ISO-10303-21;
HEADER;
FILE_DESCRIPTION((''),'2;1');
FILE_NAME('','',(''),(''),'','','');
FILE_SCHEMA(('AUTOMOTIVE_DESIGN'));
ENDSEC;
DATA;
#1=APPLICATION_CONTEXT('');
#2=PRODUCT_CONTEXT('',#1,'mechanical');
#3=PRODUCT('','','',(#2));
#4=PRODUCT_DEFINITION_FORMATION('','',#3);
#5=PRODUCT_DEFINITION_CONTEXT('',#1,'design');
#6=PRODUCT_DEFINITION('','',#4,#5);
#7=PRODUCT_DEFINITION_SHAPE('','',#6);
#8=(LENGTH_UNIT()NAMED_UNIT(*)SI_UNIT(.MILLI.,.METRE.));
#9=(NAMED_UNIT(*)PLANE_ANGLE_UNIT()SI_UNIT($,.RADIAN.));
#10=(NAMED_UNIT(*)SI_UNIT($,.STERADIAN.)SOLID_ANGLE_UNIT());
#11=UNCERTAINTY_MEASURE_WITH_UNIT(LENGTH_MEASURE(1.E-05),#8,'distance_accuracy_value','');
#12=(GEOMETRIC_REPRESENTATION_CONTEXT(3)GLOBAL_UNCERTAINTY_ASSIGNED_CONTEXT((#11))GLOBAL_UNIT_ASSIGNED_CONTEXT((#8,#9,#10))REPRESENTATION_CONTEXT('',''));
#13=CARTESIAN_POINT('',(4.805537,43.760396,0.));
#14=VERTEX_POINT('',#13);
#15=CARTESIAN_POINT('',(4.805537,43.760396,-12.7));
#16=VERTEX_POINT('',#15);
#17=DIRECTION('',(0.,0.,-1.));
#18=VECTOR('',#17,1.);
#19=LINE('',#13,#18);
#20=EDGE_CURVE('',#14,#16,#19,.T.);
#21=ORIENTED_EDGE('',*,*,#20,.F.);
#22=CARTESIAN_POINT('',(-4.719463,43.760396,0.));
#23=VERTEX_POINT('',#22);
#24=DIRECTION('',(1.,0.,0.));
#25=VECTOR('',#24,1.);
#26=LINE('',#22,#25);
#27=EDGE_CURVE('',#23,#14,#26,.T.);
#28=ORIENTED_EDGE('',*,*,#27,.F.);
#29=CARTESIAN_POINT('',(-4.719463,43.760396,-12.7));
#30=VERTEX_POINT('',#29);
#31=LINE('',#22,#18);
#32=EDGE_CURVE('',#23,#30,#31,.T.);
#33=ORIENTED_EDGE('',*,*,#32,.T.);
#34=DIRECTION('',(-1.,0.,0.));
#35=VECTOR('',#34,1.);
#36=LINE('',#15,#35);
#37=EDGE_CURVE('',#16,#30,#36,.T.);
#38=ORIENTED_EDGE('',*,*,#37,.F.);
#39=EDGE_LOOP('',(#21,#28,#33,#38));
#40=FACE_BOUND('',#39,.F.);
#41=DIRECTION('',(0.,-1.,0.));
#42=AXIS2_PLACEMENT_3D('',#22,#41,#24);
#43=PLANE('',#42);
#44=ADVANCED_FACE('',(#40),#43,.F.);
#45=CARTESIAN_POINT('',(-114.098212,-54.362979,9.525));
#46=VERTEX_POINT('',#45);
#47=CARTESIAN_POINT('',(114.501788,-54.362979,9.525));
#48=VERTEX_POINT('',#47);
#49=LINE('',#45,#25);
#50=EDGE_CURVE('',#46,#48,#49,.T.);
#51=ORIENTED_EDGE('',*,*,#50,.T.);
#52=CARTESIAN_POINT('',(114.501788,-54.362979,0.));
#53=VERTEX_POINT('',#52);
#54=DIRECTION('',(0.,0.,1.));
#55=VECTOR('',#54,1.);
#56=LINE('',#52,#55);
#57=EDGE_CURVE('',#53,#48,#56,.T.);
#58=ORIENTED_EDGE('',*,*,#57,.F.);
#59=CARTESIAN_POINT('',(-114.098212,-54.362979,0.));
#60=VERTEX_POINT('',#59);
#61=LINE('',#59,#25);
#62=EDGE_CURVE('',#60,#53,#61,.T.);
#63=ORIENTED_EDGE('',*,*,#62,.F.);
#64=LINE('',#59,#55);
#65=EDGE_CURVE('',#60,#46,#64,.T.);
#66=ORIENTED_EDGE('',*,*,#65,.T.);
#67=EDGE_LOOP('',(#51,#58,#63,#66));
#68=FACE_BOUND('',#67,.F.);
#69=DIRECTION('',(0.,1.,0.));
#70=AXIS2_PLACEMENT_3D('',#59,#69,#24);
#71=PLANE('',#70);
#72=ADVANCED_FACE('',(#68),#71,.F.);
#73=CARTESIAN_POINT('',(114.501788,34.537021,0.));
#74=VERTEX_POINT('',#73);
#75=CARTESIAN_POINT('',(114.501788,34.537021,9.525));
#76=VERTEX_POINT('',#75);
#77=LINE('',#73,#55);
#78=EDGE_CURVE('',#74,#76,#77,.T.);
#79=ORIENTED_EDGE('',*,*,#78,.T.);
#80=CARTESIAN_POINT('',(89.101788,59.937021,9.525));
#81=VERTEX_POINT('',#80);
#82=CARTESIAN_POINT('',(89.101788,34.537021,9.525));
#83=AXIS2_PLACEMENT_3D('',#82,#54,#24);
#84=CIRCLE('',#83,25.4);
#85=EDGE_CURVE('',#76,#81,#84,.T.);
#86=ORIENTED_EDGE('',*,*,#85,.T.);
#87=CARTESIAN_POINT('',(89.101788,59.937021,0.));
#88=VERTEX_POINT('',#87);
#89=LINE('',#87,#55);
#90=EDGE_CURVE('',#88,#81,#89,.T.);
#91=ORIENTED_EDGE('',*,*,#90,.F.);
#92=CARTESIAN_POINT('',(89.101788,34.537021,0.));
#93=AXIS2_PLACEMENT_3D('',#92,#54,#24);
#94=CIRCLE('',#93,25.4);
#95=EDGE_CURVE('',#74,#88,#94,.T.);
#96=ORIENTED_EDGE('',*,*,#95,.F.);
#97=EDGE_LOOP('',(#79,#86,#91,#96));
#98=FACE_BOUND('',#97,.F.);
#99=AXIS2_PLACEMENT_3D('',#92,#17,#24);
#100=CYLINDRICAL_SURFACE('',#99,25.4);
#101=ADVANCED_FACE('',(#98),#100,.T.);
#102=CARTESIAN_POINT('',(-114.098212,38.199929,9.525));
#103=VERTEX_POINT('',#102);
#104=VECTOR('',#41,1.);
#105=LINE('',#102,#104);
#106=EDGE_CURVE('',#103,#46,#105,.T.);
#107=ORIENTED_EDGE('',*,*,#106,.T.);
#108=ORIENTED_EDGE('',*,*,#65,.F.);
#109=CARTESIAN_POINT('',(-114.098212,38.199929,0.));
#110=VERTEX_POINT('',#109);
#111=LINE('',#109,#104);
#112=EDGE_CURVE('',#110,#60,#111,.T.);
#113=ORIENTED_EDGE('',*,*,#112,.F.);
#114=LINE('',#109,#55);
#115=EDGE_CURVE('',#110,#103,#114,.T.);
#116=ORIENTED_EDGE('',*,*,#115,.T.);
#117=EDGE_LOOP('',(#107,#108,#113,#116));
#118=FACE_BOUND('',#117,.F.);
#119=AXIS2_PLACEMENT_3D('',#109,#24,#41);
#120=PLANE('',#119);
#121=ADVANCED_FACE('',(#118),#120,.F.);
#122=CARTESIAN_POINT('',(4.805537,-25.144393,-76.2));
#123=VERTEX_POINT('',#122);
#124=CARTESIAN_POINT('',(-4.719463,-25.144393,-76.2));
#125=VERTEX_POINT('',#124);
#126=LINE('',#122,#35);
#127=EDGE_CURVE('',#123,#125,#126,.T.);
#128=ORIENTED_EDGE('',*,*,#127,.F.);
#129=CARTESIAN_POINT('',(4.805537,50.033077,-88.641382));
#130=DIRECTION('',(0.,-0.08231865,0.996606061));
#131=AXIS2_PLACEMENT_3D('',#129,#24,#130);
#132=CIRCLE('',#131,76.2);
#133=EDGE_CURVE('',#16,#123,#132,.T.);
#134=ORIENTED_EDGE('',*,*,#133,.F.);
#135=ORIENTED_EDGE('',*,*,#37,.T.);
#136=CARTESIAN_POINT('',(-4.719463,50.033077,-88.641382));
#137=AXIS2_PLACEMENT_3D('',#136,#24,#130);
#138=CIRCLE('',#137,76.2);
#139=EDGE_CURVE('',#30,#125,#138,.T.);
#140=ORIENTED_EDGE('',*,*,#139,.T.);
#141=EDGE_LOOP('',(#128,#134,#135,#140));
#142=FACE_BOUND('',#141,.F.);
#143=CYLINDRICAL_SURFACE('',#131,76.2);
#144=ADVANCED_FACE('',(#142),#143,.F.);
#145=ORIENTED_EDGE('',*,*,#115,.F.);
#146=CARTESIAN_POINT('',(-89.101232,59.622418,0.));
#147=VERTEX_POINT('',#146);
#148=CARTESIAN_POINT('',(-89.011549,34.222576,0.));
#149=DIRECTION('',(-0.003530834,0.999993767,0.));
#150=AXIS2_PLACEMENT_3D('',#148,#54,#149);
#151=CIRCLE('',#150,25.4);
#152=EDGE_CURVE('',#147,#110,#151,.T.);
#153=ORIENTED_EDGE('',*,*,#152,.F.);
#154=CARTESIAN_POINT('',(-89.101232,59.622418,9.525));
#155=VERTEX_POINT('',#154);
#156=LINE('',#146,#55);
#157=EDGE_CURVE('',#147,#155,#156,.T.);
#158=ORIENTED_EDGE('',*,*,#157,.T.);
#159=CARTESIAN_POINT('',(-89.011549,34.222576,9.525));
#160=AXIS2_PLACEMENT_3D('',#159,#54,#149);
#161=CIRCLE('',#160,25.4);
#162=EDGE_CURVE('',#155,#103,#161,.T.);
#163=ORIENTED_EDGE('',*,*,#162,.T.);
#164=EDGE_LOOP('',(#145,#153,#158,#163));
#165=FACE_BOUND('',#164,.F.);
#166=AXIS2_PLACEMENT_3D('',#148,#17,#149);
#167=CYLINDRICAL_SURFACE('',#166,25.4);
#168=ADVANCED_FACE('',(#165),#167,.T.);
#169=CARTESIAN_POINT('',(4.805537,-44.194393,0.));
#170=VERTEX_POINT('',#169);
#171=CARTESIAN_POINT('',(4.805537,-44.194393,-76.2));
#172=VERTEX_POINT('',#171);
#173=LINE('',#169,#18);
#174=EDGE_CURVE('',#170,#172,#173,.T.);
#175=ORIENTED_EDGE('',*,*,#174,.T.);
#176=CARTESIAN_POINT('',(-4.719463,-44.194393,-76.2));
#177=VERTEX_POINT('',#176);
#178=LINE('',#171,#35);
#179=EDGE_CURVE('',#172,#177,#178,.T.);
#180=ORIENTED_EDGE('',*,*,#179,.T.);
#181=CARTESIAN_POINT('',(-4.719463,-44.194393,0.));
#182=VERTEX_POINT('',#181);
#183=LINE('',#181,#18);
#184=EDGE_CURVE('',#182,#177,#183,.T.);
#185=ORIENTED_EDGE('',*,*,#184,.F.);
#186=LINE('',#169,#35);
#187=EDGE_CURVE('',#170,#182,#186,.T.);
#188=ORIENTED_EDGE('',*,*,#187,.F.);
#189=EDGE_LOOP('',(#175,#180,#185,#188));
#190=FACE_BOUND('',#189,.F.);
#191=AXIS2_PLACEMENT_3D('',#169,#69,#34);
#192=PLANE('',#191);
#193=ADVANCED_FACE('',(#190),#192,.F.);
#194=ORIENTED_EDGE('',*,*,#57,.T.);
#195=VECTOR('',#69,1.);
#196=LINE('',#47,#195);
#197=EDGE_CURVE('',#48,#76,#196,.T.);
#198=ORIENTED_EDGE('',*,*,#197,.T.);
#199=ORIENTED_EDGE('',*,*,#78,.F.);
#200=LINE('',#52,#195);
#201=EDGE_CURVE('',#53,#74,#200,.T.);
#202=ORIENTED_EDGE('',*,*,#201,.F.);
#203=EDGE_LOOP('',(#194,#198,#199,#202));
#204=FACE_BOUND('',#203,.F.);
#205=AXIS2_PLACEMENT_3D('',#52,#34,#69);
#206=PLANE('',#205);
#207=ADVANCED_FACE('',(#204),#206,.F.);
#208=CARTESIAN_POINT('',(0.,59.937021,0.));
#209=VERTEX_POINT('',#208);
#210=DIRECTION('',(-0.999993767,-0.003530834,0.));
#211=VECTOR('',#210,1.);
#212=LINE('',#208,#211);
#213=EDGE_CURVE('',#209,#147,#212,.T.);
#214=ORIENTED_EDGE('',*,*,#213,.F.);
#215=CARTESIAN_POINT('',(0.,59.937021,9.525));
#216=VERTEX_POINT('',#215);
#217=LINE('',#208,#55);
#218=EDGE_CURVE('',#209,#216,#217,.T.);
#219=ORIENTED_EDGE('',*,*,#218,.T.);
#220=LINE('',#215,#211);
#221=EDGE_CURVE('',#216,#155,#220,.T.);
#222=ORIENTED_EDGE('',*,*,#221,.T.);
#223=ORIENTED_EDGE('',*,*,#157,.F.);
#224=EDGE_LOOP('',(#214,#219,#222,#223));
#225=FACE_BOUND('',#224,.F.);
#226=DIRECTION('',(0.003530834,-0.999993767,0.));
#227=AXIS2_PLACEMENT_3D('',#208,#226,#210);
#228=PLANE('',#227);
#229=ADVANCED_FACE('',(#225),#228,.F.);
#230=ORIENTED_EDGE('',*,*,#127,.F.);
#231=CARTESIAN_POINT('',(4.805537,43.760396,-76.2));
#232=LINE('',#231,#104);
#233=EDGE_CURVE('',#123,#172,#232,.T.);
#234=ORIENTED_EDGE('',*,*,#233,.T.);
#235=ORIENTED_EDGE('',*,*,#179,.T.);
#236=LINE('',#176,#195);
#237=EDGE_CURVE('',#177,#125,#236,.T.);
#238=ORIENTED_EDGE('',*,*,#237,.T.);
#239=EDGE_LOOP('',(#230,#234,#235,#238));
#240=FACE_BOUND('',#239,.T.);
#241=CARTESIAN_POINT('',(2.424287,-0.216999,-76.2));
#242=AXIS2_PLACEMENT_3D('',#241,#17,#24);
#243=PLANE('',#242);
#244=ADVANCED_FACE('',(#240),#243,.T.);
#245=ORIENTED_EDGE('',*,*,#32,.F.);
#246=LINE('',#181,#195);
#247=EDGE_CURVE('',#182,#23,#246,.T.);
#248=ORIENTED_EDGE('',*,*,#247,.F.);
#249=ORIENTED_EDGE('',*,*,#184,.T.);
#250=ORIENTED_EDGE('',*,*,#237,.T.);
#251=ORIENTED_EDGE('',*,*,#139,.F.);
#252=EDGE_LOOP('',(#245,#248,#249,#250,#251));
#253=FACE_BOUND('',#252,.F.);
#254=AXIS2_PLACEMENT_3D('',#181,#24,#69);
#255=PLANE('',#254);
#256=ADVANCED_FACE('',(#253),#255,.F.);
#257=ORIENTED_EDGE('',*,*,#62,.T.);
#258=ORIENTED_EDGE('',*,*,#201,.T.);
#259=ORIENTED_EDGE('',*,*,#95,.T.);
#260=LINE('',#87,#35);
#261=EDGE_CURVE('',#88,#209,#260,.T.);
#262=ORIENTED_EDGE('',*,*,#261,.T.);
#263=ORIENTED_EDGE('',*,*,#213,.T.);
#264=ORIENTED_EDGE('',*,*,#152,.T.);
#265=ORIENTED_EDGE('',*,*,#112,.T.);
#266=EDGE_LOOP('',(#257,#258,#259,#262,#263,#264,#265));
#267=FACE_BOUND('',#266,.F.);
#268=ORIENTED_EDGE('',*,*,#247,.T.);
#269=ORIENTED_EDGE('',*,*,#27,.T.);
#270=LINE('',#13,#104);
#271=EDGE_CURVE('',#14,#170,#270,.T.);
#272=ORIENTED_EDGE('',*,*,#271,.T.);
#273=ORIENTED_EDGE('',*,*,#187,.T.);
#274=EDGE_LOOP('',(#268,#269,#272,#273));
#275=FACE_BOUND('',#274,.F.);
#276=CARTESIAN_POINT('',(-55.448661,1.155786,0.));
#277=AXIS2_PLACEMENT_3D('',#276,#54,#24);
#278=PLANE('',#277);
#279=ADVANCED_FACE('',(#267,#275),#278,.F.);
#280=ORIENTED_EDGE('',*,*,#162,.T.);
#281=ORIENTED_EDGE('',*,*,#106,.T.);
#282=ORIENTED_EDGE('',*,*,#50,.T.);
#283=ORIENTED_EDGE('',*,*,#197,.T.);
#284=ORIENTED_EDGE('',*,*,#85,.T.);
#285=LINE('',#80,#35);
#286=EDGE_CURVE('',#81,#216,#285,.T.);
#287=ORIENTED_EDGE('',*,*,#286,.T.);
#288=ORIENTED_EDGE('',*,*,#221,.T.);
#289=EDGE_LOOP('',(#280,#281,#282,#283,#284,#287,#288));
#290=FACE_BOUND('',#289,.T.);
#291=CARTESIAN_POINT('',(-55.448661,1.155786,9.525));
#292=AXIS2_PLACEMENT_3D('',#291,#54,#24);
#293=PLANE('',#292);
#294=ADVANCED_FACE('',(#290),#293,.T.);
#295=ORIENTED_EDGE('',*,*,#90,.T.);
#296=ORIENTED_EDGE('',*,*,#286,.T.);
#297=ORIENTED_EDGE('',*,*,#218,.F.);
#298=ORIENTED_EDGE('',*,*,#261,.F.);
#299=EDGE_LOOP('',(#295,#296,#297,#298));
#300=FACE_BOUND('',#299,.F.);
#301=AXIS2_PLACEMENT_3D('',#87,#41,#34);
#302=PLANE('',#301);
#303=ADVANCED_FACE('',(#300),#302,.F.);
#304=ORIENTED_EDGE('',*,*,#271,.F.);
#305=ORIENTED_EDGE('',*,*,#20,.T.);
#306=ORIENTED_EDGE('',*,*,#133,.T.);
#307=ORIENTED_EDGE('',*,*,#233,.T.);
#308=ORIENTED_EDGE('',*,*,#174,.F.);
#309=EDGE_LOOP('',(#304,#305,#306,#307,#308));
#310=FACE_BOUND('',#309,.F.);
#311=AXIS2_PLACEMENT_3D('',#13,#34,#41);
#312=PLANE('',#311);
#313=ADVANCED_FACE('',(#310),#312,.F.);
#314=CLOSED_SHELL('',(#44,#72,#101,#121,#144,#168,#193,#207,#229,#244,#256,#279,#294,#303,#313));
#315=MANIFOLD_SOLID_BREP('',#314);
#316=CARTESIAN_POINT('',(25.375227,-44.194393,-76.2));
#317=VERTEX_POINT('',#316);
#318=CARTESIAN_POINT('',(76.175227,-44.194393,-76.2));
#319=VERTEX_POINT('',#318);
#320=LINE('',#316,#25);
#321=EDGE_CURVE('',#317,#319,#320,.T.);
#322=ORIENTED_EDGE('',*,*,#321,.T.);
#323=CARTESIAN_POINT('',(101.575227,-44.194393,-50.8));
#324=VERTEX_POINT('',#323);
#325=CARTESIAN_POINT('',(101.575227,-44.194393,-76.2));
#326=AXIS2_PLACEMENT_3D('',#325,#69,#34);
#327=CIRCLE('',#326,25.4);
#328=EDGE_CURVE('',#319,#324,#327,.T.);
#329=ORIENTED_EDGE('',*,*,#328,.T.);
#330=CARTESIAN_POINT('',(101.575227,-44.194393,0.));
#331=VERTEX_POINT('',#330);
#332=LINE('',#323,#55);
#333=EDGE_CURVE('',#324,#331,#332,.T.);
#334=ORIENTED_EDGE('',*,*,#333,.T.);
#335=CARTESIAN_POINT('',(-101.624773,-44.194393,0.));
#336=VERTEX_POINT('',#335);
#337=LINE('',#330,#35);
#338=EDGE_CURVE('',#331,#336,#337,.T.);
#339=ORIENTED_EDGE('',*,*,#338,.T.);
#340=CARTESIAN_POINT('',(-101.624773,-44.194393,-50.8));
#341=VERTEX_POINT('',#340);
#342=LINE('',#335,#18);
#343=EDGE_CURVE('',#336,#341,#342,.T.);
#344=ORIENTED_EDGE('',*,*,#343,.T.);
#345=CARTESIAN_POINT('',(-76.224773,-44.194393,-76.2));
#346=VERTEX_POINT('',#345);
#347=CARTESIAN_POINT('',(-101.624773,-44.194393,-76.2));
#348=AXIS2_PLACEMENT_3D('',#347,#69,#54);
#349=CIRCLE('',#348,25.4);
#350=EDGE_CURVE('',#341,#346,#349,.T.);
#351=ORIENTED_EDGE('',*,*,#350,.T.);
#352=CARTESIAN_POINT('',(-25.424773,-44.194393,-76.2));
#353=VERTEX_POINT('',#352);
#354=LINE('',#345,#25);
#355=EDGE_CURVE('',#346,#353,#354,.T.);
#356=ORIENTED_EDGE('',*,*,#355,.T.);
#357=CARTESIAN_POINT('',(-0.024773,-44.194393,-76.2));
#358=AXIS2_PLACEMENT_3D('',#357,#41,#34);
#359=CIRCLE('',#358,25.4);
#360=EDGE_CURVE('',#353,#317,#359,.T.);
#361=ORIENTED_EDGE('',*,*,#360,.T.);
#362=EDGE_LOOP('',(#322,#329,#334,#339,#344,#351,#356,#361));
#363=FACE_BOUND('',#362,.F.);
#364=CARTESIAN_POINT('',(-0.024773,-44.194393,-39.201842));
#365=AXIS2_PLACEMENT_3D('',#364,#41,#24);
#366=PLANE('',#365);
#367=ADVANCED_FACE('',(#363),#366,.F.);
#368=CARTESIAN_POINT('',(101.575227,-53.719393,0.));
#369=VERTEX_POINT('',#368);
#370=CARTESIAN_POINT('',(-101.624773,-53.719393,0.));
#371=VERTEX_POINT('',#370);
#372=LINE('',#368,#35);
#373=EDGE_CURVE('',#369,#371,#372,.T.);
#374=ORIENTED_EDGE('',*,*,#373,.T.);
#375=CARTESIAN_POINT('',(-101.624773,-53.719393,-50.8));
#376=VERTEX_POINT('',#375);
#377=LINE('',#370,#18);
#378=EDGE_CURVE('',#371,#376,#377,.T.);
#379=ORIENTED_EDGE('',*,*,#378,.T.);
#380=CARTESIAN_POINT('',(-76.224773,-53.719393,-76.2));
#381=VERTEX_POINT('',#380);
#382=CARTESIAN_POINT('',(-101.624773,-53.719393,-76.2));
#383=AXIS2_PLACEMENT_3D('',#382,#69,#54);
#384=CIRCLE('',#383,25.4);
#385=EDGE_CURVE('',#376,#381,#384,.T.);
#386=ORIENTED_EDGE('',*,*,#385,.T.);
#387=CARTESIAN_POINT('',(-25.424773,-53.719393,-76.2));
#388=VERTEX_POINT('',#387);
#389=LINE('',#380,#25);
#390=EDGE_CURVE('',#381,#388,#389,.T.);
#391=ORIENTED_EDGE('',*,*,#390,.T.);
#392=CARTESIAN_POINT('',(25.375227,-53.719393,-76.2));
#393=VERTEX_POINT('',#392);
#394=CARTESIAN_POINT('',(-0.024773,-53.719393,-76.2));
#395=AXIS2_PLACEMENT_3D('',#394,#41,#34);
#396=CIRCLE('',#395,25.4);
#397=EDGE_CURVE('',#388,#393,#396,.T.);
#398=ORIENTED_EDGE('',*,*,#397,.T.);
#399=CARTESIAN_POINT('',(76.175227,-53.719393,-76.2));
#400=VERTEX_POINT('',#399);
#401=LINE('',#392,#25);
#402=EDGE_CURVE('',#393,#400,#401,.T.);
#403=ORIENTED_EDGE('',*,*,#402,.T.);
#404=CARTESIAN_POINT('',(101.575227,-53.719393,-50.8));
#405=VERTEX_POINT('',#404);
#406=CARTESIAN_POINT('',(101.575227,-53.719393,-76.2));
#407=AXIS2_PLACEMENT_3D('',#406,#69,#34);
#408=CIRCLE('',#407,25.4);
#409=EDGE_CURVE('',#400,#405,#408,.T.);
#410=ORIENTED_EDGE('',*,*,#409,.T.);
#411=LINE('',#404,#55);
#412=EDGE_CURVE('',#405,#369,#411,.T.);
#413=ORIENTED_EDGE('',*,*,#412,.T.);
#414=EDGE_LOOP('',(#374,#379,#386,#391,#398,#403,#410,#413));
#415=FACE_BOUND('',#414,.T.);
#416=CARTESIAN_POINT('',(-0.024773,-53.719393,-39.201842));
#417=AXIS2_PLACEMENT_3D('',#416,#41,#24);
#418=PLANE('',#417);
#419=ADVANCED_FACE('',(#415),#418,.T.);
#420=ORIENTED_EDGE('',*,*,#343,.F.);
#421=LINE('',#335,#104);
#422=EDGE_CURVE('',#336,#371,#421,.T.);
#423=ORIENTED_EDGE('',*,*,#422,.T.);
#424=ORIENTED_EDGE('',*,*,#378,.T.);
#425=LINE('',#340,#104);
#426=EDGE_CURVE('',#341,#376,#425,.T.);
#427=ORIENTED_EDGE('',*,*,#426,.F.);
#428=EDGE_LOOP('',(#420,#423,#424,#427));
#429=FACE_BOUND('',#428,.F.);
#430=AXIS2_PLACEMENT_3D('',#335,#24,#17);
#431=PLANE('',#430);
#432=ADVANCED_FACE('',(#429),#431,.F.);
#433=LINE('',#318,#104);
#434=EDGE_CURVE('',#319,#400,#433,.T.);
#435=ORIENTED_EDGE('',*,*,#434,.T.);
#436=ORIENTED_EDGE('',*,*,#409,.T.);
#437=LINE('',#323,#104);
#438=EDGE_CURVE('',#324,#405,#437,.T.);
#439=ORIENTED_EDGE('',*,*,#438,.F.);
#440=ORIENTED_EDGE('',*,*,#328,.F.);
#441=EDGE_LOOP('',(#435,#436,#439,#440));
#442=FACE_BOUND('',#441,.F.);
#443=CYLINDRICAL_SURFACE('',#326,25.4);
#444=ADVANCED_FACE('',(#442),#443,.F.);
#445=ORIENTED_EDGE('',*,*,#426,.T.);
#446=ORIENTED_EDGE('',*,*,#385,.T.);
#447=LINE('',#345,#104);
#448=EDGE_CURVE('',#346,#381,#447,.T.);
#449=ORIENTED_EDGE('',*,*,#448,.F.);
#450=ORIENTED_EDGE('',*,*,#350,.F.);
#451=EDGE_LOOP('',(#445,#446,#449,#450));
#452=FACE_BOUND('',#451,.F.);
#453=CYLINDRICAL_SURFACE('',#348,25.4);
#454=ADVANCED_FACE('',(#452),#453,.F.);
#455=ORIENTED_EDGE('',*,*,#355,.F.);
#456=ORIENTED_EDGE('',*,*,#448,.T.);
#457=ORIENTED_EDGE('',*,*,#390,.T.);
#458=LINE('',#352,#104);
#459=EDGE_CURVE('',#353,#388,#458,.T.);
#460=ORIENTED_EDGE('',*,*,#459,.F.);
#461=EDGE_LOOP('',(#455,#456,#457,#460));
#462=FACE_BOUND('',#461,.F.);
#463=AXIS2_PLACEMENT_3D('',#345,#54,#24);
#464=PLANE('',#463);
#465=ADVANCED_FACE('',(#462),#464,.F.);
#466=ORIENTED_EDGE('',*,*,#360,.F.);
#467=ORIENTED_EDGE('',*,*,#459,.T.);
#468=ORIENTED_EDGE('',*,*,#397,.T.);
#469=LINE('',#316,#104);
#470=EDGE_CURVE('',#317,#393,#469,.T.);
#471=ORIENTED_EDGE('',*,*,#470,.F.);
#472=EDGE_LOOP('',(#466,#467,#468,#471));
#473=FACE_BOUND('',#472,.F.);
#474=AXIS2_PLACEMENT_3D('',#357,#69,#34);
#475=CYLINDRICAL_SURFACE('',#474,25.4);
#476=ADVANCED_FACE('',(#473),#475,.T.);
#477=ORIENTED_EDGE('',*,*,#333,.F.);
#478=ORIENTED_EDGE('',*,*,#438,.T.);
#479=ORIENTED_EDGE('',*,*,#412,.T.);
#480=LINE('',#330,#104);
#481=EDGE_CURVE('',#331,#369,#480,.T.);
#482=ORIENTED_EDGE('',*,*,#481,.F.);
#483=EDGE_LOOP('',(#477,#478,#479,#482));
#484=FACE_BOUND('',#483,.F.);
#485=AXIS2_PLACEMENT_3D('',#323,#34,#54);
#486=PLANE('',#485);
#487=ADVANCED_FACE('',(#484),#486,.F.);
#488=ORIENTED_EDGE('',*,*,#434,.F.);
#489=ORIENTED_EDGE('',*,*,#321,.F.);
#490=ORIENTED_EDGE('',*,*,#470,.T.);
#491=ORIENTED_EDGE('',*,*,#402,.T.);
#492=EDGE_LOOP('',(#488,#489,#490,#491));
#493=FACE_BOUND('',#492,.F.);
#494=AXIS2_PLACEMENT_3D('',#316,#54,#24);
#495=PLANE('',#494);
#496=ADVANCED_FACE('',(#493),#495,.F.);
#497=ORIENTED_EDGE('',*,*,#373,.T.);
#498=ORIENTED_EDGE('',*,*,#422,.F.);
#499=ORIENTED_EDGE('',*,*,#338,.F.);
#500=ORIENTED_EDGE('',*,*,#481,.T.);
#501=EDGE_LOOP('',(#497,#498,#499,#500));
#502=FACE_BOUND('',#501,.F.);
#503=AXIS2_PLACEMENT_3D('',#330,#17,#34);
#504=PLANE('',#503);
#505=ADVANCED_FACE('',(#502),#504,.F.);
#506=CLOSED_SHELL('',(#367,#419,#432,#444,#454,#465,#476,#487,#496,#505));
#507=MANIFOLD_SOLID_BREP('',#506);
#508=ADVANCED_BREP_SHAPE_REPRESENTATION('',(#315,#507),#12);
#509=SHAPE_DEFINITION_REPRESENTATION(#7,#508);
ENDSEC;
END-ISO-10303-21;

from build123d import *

# Parameters (mm, degrees)
F1_DEPTH = 9.525
F4_DEPTH = 76.2
F6_DEPTH = 9.525
F9_DEPTH = 25.4


# Not quite as in the source:
# - a feature of the source that left no trace in its solid (it failed there, or was rolled back) is left out


with BuildPart() as f1:
    # F0 (on Top) → F1 (new body)
    with BuildSketch(Plane.XY):
        with BuildLine():
            Line((0.2017877996, -54.3629787627), (0, 59.9370212373))
            Line((0, 59.9370212373), (-89.1012323912, 59.6224176037))
            ThreePointArc((-89.1012323912, 59.6224176037), (-105.5400958188, 53.5090257564), (-114.0982122004, 38.1999292884))
            Line((-114.0982122004, 38.1999292884), (-114.0982122004, -54.3629787627))
            Line((-114.0982122004, -54.3629787627), (0.2017877996, -54.3629787627))
        make_face()
        with BuildLine():
            Line((89.1017877996, 59.9370212373), (0, 59.9370212373))
            Line((0, 59.9370212373), (0.2017877996, -54.3629787627))
            Line((0.2017877996, -54.3629787627), (114.5017877996, -54.3629787627))
            Line((114.5017877996, -54.3629787627), (114.5017877996, 34.5370212373))
            ThreePointArc((114.5017877996, 34.5370212373), (107.0623000417, 52.4975334794), (89.1017877996, 59.9370212373))
        make_face()
    extrude(amount=F1_DEPTH)

    # F3 (on face) → F4 (join)
    with BuildSketch(Plane(origin=(0, 0, 0), x_dir=(1, 0, 0), z_dir=(0, 0, -1))):
        Polygon((4.8055368662, 44.1943933845), (0.0430368662, 44.1943933845), (0.0430368662, -43.7603956342), (4.8055368662, -43.7603956342), (4.8055368662, -34.2353956342), align=None)
        Polygon((0.0430368662, 44.1943933845), (-4.7194631338, 44.1943933845), (-4.7194631338, -34.2353956342), (-4.7194631338, -43.7603956342), (0.0430368662, -43.7603956342), align=None)
    extrude(amount=F4_DEPTH)

    # F8 (on face) → F9 (cut)
    with BuildSketch(Plane.YZ.offset(4.8055368662)):
        with BuildLine():
            Line((43.7603956342, -76.2), (43.7603956342, -12.7))
            ThreePointArc((43.7603956342, -12.7), (-1.6060003551, -32.6070556012), (-25.1443933845, -76.2))
            Line((-25.1443933845, -76.2), (43.7603956342, -76.2))
        make_face()
    extrude(amount=-F9_DEPTH, mode=Mode.SUBTRACT)


with BuildPart() as f6:
    # F5 (on face) → F6 (new body)
    with BuildSketch(Plane.XZ.offset(44.1943933845)):
        with BuildLine():
            Line((101.575226661, 0), (-101.624773339, 0))
            Line((-101.624773339, 0), (-101.624773339, -50.8))
            ThreePointArc((-101.624773339, -50.8), (-83.6642610969, -58.2394877579), (-76.224773339, -76.2))
            Line((-76.224773339, -76.2), (-25.424773339, -76.2))
            ThreePointArc((-25.424773339, -76.2), (-0.024773339, -101.6), (25.375226661, -76.2))
            Line((25.375226661, -76.2), (76.175226661, -76.2))
            ThreePointArc((76.175226661, -76.2), (83.6147144189, -58.2394877579), (101.575226661, -50.8))
            Line((101.575226661, -50.8), (101.575226661, 0))
        make_face()
    extrude(amount=F6_DEPTH)


solid = Compound([f1.part, f6.part])
